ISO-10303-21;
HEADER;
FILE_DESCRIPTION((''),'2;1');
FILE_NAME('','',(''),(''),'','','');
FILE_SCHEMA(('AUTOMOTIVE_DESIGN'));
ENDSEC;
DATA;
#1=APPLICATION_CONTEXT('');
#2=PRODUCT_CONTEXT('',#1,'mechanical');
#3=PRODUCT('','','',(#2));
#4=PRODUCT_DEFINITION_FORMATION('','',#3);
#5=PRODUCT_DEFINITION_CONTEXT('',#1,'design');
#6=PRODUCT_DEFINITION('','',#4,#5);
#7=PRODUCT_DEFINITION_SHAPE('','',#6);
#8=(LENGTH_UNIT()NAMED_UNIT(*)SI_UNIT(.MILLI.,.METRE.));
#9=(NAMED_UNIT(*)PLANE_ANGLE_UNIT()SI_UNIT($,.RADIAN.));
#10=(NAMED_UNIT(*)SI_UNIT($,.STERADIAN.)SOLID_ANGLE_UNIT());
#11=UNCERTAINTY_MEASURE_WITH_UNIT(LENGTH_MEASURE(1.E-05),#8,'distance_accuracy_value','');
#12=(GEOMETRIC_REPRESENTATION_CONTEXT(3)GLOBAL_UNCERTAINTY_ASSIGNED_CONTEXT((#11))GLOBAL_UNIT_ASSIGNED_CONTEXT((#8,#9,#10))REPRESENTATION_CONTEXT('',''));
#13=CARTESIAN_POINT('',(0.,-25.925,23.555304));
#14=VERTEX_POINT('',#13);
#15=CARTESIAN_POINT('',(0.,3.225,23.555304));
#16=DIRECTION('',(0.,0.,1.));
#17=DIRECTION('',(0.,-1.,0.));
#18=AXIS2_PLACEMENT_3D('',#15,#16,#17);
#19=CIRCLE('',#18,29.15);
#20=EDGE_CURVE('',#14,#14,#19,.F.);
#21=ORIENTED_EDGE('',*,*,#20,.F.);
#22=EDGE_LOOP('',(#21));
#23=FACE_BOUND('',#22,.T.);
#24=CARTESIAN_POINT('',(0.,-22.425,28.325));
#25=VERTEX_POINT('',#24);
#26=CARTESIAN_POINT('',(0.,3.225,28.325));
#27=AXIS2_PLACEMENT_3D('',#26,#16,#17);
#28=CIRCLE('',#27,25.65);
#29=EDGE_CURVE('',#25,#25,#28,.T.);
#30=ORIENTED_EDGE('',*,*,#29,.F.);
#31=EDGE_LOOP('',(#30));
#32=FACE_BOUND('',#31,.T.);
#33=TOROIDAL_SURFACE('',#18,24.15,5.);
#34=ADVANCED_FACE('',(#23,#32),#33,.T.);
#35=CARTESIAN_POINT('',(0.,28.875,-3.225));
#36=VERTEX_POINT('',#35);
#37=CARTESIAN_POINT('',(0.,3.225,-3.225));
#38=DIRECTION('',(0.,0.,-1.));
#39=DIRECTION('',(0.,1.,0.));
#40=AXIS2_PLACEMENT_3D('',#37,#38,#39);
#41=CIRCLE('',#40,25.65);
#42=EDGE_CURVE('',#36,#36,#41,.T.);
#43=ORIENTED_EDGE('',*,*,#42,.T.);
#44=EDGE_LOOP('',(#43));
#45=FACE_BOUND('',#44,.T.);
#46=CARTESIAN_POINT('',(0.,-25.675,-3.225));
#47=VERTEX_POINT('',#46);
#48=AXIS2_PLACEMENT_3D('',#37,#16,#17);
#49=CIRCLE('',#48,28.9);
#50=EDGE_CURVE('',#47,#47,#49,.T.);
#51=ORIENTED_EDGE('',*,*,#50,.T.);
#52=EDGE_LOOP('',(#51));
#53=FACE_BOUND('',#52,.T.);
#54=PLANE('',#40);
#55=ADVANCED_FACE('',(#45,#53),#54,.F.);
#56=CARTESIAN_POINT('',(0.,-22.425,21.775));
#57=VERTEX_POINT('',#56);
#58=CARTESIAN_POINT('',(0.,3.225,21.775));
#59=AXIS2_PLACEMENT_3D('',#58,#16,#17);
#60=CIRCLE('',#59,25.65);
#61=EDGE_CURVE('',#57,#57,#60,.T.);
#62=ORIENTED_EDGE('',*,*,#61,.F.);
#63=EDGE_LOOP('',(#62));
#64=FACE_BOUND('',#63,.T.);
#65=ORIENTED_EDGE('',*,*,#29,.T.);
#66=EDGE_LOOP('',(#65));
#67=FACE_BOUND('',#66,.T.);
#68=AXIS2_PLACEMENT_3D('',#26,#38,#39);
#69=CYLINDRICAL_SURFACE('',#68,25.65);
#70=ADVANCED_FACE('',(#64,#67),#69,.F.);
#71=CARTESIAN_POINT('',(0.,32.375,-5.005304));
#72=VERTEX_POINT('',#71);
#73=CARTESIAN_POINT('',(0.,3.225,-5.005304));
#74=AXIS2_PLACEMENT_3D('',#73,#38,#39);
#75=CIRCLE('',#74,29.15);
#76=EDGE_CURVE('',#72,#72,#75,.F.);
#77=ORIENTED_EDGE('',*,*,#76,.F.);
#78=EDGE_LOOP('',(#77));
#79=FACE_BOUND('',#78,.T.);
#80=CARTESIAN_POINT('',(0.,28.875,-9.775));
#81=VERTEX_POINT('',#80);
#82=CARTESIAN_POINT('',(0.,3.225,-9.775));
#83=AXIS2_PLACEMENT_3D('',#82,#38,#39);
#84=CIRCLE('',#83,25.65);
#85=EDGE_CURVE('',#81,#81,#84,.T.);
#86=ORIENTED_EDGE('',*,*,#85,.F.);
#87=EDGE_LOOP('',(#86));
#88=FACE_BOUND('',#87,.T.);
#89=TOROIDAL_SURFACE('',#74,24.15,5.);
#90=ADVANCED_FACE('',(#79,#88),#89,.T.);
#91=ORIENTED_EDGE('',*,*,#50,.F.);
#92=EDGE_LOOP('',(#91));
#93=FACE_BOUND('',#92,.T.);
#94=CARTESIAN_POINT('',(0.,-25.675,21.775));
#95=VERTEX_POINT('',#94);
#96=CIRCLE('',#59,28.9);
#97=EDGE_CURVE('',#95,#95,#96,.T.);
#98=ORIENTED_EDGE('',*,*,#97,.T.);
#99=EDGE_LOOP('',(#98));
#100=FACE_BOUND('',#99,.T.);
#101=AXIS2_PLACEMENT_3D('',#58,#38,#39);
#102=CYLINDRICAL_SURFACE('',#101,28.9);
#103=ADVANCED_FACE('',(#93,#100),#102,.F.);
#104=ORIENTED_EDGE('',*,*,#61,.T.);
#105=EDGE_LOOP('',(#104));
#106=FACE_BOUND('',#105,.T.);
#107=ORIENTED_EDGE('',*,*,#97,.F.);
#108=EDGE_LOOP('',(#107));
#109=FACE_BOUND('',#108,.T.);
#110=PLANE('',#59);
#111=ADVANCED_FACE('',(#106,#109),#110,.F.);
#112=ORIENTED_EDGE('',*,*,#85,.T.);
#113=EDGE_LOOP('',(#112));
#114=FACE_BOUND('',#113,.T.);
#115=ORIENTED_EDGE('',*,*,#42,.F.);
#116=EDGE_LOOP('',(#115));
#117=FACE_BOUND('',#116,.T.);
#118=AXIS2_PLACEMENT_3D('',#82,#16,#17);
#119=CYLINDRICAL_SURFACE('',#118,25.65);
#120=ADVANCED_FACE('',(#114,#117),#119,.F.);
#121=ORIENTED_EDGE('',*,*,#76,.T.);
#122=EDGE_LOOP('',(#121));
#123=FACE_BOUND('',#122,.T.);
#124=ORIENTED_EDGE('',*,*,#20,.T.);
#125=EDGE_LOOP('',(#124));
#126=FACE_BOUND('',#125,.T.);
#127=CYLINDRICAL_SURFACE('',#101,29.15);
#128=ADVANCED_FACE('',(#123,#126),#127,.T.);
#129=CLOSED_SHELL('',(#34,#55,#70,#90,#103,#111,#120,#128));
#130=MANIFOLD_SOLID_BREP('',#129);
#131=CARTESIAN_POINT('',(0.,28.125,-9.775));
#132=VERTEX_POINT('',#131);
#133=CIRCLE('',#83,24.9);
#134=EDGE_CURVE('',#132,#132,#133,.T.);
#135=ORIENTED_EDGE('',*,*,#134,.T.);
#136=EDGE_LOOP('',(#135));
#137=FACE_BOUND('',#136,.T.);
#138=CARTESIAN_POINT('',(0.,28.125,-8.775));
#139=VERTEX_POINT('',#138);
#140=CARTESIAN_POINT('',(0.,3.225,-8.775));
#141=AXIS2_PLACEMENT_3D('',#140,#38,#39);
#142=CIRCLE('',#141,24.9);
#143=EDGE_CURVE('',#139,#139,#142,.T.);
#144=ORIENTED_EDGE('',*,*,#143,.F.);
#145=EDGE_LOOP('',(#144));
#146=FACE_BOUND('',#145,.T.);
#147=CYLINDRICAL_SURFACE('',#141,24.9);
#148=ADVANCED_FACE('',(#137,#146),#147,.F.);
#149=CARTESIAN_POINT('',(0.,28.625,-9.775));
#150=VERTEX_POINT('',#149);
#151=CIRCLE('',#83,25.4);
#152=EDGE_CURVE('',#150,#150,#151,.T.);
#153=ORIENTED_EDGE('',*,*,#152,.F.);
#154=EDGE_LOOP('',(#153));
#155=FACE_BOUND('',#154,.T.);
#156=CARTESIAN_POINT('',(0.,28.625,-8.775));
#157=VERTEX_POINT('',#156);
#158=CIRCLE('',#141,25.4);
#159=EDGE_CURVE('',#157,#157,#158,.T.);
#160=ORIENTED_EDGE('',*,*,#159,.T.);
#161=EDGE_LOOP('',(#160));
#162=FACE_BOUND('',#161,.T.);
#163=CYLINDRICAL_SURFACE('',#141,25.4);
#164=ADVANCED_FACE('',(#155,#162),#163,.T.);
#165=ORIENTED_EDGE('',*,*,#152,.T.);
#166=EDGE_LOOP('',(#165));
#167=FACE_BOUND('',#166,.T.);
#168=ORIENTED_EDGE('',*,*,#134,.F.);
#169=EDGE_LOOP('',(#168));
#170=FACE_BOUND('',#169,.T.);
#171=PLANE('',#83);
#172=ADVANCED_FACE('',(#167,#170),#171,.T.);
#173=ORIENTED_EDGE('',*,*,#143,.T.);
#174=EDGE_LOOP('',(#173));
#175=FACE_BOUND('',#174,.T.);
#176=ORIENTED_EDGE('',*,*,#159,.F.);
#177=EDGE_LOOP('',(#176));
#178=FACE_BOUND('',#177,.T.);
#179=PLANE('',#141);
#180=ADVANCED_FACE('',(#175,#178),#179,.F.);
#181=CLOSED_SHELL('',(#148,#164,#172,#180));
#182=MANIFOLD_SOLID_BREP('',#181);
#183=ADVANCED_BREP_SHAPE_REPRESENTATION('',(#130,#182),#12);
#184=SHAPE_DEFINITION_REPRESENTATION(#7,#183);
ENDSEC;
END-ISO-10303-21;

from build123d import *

# Parameters (mm, degrees)
SKETCH1_R             = 29.15
SKETCH1_R_2           = 28.9
BOSS_EXTRUDE1_DEPTH   = 25
SKETCH2_R             = 29.15
SKETCH2_R_2           = 25.65
BOSS_EXTRUDE2_DEPTH   = 6.55
BOSS_EXTRUDE3_START   = 6.55
SKETCH3_R             = 29.15
SKETCH3_R_2           = 25.65
BOSS_EXTRUDE3_DEPTH   = 6.55
SKETCH4_R             = 25.4
SKETCH4_R_2           = 24.9
BOSS_EXTRUDE4_DEPTH   = 1
FILLET1_R             = 5
BODY_MOVE_COPY4_ANGLE = 90


with BuildPart() as part:
    # Sketch1 → Boss-Extrude1 (new body)
    with BuildSketch(Plane(origin=(0, 0, 0), x_dir=(1, 0, 0), z_dir=(0, 1, 0))):
        with Locations(Location((0, 0, 0), (0, 0, 270))):
            Circle(SKETCH1_R)
        with Locations(Location((0, 0, 0), (0, 0, 270))):
            Circle(SKETCH1_R_2, mode=Mode.SUBTRACT)
    extrude(amount=BOSS_EXTRUDE1_DEPTH)

    # Sketch2 → Boss-Extrude2 (add)
    with BuildSketch(Plane(origin=(0, 25, 0), x_dir=(1, 0, 0), z_dir=(0, 1, 0))):
        with Locations(Location((0, 0, 0), (0, 0, 270))):
            Circle(SKETCH2_R)
        with Locations(Location((0, 0, 0), (0, 0, 270))):
            Circle(SKETCH2_R_2, mode=Mode.SUBTRACT)
    extrude(amount=BOSS_EXTRUDE2_DEPTH)

    # Sketch3 → Boss-Extrude3 (add)
    with BuildSketch(Plane.XZ.offset(BOSS_EXTRUDE3_START)):
        with Locations(Location((0, 0, 0), (0, 0, 270))):
            Circle(SKETCH3_R)
        with Locations(Location((0, 0, 0), (0, 0, 90))):
            Circle(SKETCH3_R_2, mode=Mode.SUBTRACT)
    extrude(amount=-BOSS_EXTRUDE3_DEPTH)

    # Fillet1
    # the kernel refuses this fillet: 5 mm, written as the material it takes off along each edge
    with BuildSketch(Plane(origin=(0, -6.55, 0), x_dir=(0, 0, -1), z_dir=(-1, 0, 0))) as fillet1_piece_1:
        with BuildLine():
            CenterArc((24.15, -4.769696007), FILLET1_R, 0, 72.542396876)
            Line((25.65, 0), (25.68, 0.09539392))
            ThreePointArc((25.68, 0.09539392), (27.4, 0.1), (29.15, 0.1))
            Line((29.15, 0.1), (29.25, 0))
            Line((29.25, 0), (29.25, -4.769696007))
            Line((29.25, -4.769696007), (29.15, -4.769696007))
        make_face()
    revolve(axis=Axis((0, -6.55, 0), (0, -1, 0)), mode=Mode.SUBTRACT)
    with BuildSketch(Plane(origin=(0, 31.55, 0), x_dir=(0, 0, 1), z_dir=(-1, 0, 0))) as fillet1_piece_2:
        with BuildLine():
            CenterArc((24.15, -4.769696007), FILLET1_R, 360, 72.542396876)
            Line((25.65, 0), (25.68, 0.09539392))
            ThreePointArc((25.68, 0.09539392), (27.4, 0.1), (29.15, 0.1))
            Line((29.15, 0.1), (29.25, 0))
            Line((29.25, 0), (29.25, -4.769696007))
            Line((29.25, -4.769696007), (29.15, -4.769696007))
        make_face()
    revolve(axis=Axis((0, 31.55, 0), (0, 1, 0)), mode=Mode.SUBTRACT)


with BuildPart() as body_2:
    # Sketch4 → Boss-Extrude4 (new body)
    with BuildSketch(Plane.XZ.offset(6.55)):
        with Locations(Location((0, 0, 0), (0, 0, 270))):
            Circle(SKETCH4_R)
        with Locations(Location((0, 0, 0), (0, 0, 270))):
            Circle(SKETCH4_R_2, mode=Mode.SUBTRACT)
    extrude(amount=-BOSS_EXTRUDE4_DEPTH)


with BuildPart() as part_1:
    # Body-Move/Copy4: moved
    add(part.part.rotate(Axis((0, 3.225, 0), (1, 0, 0)), BODY_MOVE_COPY4_ANGLE))


with BuildPart() as body_2_1:
    # Body-Move/Copy4: moved
    add(body_2.part.rotate(Axis((0, 3.225, 0), (1, 0, 0)), BODY_MOVE_COPY4_ANGLE))


solid = Compound([part_1.part, body_2_1.part])
